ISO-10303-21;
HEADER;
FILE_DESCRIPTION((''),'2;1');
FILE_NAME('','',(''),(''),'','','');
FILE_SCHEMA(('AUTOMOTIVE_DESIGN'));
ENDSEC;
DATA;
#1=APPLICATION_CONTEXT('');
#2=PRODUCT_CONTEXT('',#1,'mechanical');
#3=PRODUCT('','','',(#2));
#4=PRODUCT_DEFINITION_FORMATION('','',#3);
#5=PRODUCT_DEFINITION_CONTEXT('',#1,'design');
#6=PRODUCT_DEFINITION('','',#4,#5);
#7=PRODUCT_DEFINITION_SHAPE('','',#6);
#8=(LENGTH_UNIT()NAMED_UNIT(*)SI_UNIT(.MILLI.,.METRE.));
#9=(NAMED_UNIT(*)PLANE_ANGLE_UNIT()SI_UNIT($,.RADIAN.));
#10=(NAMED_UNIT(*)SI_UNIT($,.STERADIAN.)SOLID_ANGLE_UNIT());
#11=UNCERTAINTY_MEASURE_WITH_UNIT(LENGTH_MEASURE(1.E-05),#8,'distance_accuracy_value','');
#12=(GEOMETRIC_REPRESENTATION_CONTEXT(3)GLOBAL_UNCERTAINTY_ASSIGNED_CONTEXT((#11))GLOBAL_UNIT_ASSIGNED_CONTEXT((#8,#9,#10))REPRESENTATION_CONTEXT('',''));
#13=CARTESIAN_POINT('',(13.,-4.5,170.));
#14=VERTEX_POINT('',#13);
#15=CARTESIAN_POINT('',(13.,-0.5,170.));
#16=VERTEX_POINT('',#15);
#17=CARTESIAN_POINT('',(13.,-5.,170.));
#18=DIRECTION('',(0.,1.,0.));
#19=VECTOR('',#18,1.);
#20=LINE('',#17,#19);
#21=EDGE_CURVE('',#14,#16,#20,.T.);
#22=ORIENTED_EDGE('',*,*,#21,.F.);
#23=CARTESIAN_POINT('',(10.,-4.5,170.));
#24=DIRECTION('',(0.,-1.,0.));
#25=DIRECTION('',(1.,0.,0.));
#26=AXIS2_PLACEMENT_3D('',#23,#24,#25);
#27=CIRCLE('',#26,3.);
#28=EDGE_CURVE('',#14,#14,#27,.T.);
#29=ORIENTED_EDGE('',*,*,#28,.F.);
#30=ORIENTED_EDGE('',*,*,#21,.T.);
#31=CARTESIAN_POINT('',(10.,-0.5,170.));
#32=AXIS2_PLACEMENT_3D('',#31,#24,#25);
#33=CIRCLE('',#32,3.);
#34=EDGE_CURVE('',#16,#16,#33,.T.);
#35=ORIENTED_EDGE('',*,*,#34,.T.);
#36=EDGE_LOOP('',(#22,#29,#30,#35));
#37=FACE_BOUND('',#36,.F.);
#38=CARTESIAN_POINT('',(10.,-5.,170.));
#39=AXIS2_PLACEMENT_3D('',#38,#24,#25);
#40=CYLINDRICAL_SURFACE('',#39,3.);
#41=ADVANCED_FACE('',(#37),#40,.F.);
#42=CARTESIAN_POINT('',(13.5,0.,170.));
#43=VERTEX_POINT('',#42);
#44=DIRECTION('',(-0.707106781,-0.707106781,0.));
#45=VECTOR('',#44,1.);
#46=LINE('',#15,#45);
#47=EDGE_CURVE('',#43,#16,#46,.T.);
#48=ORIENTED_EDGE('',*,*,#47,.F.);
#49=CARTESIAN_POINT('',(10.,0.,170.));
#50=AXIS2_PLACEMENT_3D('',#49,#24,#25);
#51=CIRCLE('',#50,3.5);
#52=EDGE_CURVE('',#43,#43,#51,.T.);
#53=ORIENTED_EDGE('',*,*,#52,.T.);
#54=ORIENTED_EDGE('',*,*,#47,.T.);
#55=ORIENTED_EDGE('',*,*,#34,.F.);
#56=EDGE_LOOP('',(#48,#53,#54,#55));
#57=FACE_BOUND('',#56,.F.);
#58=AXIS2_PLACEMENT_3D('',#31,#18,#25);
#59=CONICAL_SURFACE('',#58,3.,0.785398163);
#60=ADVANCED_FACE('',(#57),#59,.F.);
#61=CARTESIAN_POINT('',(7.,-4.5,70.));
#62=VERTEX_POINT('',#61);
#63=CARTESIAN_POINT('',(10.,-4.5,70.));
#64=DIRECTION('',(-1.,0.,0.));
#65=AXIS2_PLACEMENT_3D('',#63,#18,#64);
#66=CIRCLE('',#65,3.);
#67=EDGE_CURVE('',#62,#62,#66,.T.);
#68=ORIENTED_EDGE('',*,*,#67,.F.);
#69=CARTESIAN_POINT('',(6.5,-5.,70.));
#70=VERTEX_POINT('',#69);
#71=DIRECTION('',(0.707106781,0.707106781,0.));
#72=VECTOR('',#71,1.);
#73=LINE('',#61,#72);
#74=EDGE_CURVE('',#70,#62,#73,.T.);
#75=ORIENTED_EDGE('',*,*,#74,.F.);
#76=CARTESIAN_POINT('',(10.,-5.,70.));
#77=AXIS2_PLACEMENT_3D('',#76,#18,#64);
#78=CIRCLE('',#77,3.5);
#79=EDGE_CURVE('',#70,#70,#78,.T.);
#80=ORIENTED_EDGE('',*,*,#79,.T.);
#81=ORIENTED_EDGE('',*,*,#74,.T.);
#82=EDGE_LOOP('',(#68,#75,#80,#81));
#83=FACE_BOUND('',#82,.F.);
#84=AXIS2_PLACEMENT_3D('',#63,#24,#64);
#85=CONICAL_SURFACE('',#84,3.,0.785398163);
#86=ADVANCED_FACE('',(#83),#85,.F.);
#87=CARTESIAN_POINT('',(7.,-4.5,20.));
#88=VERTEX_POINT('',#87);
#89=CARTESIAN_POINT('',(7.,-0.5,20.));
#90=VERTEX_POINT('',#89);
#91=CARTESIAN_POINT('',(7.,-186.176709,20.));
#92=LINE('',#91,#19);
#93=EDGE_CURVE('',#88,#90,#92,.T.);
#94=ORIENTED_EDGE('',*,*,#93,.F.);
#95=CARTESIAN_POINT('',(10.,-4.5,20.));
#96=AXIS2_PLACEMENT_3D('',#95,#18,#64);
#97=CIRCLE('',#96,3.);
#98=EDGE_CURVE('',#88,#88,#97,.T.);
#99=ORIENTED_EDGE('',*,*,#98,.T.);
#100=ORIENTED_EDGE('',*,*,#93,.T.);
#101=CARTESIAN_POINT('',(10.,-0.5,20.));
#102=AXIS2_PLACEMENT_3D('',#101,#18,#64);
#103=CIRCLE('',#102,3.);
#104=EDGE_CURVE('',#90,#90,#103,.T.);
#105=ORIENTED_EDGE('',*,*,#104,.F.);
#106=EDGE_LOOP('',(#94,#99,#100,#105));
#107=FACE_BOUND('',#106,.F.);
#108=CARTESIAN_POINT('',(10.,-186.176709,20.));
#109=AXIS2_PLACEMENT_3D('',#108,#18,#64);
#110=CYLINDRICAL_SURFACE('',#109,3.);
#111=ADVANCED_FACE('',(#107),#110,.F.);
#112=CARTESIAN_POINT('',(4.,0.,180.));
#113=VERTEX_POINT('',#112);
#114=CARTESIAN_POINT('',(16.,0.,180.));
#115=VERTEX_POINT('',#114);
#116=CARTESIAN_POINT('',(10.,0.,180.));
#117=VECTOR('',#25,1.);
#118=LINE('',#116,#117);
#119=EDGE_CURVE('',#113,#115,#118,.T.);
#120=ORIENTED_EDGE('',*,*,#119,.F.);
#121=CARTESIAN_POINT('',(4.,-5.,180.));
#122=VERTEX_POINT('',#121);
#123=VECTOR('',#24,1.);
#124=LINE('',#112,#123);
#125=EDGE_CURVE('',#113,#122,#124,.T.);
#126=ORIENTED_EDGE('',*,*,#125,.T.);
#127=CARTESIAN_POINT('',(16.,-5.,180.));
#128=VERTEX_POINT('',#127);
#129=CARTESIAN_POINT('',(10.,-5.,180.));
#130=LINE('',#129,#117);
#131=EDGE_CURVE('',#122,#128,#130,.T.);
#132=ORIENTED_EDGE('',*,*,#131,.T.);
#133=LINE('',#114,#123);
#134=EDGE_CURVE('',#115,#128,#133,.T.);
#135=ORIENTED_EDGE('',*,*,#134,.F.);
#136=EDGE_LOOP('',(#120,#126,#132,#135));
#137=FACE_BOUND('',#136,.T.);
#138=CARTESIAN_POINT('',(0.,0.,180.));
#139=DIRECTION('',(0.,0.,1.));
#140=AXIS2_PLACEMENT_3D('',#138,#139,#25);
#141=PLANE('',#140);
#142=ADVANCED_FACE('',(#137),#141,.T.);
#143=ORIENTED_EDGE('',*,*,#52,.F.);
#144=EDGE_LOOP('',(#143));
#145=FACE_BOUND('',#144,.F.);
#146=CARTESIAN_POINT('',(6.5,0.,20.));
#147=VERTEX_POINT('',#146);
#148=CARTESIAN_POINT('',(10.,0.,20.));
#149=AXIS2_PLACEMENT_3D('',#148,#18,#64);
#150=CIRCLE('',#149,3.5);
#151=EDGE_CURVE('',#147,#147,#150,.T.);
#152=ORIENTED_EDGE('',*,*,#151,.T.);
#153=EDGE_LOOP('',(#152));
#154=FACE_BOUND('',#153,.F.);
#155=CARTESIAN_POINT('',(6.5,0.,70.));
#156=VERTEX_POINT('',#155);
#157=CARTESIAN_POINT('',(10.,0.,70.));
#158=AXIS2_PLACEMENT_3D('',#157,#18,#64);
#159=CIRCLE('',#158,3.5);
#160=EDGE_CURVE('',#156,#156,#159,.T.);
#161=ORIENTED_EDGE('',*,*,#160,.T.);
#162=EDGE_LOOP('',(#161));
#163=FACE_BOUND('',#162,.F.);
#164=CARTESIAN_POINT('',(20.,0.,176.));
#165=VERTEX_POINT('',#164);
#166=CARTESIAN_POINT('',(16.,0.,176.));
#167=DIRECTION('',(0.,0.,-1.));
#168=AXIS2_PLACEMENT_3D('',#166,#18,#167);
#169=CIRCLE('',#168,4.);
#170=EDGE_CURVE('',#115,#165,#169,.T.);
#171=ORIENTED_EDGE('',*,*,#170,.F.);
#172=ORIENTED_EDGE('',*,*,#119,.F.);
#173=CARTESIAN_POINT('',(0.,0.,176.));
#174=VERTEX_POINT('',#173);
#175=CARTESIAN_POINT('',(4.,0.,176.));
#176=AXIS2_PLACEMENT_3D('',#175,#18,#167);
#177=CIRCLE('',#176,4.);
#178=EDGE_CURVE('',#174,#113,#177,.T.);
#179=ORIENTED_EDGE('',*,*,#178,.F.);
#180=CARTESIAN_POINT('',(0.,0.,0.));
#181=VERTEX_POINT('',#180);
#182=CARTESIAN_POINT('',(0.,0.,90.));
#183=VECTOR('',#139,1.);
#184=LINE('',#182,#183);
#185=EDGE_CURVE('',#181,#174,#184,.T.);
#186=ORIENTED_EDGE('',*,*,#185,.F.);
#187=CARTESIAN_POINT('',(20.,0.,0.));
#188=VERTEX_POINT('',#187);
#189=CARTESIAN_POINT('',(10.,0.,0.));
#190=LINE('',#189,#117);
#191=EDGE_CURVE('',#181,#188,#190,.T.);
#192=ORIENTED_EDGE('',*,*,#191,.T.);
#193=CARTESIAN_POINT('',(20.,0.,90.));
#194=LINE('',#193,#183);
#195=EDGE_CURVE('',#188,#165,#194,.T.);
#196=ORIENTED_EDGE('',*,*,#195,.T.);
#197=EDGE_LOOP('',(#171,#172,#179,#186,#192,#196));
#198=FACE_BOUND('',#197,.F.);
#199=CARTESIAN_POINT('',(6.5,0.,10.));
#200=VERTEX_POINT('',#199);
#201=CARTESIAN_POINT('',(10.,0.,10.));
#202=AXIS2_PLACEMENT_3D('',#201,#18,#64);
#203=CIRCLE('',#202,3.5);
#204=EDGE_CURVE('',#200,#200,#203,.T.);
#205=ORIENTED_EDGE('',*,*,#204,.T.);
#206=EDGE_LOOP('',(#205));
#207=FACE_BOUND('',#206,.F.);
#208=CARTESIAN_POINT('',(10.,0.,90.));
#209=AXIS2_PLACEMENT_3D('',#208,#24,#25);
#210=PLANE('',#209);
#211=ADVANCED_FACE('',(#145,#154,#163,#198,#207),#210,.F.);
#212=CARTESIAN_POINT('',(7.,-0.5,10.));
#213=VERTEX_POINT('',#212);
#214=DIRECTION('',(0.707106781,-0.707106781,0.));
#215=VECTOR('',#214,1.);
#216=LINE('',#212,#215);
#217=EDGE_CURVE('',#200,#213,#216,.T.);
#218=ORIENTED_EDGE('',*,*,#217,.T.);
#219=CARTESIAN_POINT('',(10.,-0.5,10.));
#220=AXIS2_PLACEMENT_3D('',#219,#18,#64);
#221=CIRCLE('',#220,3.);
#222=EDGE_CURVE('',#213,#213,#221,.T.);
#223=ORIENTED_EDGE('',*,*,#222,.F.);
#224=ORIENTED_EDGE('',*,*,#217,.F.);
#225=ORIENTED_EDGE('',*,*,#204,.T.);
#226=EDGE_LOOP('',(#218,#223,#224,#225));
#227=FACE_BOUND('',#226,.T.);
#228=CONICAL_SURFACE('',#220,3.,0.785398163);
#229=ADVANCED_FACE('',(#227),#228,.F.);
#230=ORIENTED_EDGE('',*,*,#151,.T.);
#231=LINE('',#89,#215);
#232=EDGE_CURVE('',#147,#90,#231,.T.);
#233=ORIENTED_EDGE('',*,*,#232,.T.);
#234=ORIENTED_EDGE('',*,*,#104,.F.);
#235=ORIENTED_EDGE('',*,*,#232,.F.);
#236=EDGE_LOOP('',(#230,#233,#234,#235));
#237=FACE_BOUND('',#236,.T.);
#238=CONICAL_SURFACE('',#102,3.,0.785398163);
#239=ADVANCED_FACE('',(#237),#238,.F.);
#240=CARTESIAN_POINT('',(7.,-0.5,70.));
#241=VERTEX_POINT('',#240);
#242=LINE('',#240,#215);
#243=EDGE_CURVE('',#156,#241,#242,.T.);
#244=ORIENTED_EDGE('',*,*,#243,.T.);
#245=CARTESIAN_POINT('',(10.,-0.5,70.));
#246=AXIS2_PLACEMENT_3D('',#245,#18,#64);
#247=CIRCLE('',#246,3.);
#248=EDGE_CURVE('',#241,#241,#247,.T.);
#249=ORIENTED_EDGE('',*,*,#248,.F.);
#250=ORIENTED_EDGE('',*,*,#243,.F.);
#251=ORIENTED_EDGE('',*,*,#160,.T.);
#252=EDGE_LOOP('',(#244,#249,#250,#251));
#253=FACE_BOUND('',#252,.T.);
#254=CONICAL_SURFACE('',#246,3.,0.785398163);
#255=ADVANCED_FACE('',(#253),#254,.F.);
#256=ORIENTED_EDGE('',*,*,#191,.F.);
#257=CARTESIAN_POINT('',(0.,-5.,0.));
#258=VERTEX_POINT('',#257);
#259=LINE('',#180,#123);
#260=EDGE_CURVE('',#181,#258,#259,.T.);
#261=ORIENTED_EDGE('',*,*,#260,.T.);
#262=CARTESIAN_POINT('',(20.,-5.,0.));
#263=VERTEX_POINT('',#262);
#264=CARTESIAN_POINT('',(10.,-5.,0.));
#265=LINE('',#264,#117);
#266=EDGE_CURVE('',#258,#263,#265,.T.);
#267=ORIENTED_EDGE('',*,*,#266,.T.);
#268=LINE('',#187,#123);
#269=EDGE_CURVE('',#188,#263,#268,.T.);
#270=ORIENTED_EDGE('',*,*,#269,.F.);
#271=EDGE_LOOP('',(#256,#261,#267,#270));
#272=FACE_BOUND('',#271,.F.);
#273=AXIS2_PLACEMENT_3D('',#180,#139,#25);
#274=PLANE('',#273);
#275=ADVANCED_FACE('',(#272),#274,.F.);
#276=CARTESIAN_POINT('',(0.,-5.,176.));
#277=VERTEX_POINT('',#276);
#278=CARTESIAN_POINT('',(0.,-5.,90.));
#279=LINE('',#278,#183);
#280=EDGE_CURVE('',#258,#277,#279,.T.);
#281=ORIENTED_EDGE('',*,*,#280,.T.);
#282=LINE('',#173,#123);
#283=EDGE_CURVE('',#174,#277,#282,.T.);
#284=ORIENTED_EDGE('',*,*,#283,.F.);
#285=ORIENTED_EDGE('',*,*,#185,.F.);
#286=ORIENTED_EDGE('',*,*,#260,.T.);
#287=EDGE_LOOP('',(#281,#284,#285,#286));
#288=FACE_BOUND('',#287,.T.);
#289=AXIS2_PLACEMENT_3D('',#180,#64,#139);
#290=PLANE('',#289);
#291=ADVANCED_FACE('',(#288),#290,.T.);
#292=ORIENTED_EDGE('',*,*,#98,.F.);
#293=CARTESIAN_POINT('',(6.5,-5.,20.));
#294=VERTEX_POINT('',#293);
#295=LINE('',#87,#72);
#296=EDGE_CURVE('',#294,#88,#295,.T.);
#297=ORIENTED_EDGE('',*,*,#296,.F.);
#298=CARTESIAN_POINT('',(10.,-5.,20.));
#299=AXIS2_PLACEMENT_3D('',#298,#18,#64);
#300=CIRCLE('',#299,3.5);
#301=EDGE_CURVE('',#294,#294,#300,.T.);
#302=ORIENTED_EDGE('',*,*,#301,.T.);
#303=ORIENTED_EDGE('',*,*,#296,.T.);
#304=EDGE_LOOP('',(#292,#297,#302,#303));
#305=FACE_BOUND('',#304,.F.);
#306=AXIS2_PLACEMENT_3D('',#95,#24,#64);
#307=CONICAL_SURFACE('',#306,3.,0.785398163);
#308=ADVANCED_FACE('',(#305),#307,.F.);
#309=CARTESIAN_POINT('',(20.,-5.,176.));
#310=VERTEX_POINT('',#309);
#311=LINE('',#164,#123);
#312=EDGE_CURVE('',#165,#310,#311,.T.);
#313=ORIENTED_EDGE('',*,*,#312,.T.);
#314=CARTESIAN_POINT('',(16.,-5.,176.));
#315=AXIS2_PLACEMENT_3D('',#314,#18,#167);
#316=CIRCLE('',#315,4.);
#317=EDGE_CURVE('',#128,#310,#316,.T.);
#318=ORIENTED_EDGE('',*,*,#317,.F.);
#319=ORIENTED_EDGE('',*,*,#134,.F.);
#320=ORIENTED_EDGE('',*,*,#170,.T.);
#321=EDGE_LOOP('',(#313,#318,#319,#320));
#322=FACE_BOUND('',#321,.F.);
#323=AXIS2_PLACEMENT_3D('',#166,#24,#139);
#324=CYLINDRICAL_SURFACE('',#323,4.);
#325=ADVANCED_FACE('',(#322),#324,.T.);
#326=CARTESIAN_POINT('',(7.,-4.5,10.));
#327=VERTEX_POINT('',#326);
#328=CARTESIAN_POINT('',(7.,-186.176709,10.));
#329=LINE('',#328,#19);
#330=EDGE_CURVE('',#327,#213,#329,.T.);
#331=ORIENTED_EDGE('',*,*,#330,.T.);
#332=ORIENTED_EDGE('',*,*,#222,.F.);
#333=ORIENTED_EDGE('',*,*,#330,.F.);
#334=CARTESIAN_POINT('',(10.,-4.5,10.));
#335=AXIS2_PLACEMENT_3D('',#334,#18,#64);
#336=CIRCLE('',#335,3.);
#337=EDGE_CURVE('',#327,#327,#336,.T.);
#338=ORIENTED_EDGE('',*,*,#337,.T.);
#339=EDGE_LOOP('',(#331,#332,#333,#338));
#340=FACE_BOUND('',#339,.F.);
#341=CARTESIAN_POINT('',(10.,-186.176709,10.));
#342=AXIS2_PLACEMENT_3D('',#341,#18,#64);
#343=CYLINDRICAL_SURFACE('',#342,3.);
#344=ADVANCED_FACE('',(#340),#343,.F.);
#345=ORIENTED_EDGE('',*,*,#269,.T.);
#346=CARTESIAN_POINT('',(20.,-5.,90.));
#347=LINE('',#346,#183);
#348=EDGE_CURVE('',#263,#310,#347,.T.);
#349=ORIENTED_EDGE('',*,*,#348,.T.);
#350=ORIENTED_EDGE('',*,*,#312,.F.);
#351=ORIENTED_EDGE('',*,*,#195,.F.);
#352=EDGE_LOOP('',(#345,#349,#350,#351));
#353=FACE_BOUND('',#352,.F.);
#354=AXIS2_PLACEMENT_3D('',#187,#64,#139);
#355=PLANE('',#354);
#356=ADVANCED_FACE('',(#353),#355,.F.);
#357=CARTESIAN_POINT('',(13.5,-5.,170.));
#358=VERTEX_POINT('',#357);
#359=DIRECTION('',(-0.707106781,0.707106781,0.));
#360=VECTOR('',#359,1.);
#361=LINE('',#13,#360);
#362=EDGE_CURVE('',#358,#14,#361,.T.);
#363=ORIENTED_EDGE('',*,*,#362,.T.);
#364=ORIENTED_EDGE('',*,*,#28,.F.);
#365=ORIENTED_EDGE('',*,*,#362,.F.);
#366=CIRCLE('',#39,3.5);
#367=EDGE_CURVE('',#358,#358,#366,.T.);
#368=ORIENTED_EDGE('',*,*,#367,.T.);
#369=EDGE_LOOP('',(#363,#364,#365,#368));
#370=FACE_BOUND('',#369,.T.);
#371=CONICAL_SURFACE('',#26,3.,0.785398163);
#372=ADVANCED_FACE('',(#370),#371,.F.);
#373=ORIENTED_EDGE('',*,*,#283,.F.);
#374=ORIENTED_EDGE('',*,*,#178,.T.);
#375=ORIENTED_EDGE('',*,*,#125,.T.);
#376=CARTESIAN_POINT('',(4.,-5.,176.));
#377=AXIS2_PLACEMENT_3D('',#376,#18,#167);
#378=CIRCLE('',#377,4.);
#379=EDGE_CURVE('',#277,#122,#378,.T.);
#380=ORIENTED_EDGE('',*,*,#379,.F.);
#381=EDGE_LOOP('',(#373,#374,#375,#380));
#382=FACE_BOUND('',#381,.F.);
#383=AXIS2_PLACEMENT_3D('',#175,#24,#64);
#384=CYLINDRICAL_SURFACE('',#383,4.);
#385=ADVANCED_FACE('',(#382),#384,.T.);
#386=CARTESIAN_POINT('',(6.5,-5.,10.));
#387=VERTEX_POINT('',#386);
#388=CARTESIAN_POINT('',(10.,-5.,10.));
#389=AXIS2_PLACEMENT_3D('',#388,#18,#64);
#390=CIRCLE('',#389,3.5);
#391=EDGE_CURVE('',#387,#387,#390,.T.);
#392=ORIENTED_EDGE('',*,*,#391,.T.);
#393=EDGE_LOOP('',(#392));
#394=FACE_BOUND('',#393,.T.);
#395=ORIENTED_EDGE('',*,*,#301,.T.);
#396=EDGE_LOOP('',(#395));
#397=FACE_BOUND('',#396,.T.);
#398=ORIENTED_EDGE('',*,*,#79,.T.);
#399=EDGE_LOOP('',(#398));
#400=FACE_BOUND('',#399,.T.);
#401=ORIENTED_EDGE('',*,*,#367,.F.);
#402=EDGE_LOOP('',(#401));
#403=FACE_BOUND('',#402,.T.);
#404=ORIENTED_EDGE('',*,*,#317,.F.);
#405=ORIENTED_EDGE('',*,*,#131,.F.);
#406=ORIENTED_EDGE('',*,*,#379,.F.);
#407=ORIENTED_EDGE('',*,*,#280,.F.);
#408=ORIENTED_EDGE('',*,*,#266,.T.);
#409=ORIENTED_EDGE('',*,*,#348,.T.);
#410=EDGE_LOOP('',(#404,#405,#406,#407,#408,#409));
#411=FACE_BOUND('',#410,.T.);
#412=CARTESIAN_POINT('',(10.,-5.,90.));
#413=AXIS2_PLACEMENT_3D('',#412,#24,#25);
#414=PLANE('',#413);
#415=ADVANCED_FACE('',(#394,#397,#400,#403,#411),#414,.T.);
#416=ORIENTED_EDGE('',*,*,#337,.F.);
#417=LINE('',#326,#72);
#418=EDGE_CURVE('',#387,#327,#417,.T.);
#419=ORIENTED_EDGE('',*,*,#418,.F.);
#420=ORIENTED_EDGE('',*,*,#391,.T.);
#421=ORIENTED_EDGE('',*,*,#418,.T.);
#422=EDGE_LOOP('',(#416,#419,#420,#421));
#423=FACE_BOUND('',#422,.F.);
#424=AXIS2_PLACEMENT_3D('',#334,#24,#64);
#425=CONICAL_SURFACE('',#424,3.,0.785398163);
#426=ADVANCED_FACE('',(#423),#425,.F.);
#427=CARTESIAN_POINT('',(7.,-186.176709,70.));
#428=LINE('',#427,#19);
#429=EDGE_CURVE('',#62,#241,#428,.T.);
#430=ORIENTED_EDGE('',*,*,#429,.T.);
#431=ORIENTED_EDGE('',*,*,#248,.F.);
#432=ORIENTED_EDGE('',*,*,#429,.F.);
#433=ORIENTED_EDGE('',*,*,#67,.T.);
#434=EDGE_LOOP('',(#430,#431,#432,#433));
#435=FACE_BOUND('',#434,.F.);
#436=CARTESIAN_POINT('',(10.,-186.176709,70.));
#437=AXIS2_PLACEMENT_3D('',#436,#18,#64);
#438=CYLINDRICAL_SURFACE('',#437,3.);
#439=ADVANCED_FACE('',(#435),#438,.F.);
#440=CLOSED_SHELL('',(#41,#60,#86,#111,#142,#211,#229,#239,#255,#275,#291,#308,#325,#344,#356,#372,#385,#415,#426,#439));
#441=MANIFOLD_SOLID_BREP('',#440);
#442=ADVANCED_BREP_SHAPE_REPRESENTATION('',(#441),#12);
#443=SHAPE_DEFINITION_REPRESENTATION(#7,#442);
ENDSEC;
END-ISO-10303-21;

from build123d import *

# Parameters (mm, degrees)
F0_W     = 20
F0_H     = 180
F1_DEPTH = 5
F2_R     = 3
F3_DEPTH = 5.001
F5_D     = 6
F7_D     = 6
F8_SIZE  = 0.5
F9_R     = 4


with BuildPart() as f1:
    # F0 (on Front) → F1 (new body)
    with BuildSketch(Plane.XZ):
        with Locations((10, 90)):
            Rectangle(F0_W, F0_H)
    extrude(amount=F1_DEPTH)

    # F2 (on face) → F3 (cut, through all)
    with BuildSketch(Plane.XZ.offset(5)):
        with Locations((10, 170)):
            Circle(F2_R)
    extrude(amount=-F3_DEPTH, mode=Mode.SUBTRACT)

    # F5 (through all)
    with Locations(Plane.XZ.offset(5)):
        with Locations((10, 70)):
            Hole(F5_D / 2)

    # F7 (through all)
    with Locations(Plane.XZ.offset(5)):
        with Locations((10, 10), (10, 20)):
            Hole(F7_D / 2)

    # F8
    f8_edges = [f1.edges().sort_by_distance(p)[0] for p in [
        (7, -5, 170),
        (7, 0, 170),
        (7, 0, 10),
        (7, 0, 20),
        (7, 0, 70),
        (7, -5, 10),
        (7, -5, 20),
        (7, -5, 70),
    ]]
    chamfer(f8_edges, length=F8_SIZE)

    # F9
    f9_edges = [f1.edges().sort_by_distance(p)[0] for p in [
        (20, -2.5, 180),
        (0, -2.5, 180),
    ]]
    fillet(f9_edges, radius=F9_R)


solid = f1.part
